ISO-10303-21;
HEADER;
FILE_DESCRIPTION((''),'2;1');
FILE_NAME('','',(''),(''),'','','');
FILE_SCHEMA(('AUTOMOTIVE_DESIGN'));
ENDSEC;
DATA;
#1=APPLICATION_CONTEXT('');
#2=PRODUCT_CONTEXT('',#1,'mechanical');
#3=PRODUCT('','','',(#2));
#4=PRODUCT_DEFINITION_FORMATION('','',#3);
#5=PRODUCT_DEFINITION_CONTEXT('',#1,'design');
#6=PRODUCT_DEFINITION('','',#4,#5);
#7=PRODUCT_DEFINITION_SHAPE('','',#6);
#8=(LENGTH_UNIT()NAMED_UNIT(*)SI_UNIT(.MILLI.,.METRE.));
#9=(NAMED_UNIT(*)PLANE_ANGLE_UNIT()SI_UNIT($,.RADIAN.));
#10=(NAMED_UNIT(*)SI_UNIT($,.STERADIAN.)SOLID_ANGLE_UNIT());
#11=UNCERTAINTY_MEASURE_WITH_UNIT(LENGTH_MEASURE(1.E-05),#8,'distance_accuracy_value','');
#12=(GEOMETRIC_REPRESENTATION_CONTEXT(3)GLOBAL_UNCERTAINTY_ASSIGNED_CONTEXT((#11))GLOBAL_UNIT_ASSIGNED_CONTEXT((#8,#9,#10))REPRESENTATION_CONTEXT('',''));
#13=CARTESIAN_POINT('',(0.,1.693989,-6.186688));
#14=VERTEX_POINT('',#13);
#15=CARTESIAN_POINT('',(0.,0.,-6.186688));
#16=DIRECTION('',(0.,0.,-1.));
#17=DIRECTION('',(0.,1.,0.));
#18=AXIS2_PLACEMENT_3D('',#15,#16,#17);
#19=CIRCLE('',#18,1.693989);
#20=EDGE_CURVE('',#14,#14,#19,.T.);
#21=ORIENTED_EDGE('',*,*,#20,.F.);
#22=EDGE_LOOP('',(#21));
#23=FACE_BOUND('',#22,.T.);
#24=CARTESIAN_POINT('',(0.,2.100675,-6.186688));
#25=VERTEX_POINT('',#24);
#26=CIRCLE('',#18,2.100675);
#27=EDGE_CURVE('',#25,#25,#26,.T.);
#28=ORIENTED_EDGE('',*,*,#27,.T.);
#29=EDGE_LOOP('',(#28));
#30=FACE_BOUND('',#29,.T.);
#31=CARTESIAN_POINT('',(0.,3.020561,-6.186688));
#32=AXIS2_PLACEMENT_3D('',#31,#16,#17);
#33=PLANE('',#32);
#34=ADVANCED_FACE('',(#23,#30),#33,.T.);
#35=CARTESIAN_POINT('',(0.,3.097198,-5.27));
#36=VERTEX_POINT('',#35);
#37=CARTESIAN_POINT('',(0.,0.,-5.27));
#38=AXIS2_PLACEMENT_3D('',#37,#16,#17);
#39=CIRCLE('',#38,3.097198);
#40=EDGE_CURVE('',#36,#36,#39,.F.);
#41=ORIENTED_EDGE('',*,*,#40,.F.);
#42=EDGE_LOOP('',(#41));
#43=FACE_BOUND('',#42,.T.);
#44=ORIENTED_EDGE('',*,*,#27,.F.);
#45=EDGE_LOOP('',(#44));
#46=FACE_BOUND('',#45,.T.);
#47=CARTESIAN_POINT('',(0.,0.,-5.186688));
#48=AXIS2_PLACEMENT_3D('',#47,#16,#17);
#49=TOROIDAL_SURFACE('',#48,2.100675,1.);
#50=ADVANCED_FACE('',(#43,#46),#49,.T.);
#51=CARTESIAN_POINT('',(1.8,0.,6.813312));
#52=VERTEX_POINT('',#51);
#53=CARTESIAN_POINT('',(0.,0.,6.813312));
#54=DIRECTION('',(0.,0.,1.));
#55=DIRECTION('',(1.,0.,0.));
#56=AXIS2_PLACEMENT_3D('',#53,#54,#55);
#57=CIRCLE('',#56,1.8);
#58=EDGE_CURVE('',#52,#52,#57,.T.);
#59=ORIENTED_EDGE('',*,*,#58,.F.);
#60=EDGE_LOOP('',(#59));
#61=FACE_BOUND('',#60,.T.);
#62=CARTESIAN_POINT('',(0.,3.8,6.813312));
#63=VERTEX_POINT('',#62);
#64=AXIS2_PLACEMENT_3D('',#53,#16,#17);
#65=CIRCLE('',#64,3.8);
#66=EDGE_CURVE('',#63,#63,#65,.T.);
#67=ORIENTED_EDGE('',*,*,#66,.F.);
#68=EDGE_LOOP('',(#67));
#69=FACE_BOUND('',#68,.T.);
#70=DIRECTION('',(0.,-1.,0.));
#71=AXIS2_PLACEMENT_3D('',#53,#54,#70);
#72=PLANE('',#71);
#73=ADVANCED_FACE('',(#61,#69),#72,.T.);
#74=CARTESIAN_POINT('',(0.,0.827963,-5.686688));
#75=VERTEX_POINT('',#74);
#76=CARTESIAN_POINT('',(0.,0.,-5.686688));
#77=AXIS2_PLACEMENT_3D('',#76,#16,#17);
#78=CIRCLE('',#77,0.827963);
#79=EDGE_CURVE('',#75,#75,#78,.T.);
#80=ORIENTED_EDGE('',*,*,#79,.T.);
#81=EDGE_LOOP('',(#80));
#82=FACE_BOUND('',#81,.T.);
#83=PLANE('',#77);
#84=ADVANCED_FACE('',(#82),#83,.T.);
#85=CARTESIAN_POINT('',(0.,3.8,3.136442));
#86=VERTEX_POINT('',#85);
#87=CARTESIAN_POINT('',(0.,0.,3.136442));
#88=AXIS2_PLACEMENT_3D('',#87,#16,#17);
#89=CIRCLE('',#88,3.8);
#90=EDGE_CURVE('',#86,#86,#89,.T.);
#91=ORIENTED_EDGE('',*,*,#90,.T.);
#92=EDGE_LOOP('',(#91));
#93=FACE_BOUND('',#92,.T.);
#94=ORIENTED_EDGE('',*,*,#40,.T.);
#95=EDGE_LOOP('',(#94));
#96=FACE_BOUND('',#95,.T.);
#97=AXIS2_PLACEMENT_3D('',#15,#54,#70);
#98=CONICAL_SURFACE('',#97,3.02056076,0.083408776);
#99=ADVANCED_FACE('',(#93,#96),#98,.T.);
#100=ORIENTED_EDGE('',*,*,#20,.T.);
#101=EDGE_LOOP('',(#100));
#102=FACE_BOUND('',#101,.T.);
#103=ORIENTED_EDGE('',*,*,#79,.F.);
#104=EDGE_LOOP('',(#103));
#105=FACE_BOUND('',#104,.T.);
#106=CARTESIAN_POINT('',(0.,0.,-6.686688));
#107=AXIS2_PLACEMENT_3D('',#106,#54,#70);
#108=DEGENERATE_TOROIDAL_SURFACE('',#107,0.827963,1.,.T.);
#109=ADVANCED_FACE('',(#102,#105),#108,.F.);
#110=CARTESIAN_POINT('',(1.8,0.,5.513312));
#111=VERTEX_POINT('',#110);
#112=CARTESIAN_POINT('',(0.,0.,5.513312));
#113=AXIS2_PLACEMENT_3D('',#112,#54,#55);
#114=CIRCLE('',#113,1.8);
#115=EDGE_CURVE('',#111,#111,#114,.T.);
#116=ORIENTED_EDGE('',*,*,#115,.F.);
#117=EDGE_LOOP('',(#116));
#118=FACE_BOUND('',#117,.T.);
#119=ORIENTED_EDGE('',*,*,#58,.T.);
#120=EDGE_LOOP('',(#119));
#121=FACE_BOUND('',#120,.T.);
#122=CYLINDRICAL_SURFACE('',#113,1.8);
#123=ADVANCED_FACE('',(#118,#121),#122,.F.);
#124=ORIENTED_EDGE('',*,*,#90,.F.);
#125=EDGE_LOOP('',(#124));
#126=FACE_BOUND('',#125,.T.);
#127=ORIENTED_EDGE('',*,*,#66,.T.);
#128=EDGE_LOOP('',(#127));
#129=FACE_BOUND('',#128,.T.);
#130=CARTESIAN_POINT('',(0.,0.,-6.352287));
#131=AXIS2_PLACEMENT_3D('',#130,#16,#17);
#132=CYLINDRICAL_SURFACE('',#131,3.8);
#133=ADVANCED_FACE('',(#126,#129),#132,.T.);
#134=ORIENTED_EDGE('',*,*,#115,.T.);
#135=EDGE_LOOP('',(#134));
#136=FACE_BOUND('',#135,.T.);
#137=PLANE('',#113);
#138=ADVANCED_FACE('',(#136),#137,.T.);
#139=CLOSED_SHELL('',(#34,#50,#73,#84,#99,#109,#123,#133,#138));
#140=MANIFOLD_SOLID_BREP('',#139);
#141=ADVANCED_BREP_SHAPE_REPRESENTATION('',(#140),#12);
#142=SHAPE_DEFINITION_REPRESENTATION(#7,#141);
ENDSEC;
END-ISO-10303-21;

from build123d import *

# Parameters (mm, degrees)
SKETCH_5_R          = 1.8
CUT_EXTRUDE_2_DEPTH = 1.3
FILLET_1_R          = 1
SKETCH_6_R          = 1.693988814
CUT_EXTRUDE_3_DEPTH = 0.5
FILLET_2_R          = 1


with BuildPart() as part:
    # 草图1 → 旋转1 (revolve)
    with BuildSketch(Plane(origin=(0, 0, 0), x_dir=(0, 0, -1), z_dir=(1, 0, 0))):
        Polygon((6.186687636, 3.02056076), (6.186687636, 0), (-6.813312364, 0), (-6.813312364, 3.8), (-3.136442493, 3.8), align=None)
    revolve(axis=Axis((0, 0, -6.352286977), (0, 0, 1)))

    # 草图5 → 切除-拉伸2 (cut)
    with BuildSketch(Plane.XY.offset(6.813312364)):
        Circle(SKETCH_5_R)
    extrude(amount=-CUT_EXTRUDE_2_DEPTH, mode=Mode.SUBTRACT)

    # 圆角1
    fillet_1_edges = [part.edges().sort_by_distance(p)[0] for p in [
        (0, -3.02056076, -6.186687636),
    ]]
    fillet(fillet_1_edges, radius=FILLET_1_R)

    # 草图6 → 切除-拉伸3 (cut)
    with BuildSketch(Plane(origin=(0, 0, -6.186687636), x_dir=(-1, 0, 0), z_dir=(0, 0, -1))):
        with Locations(Location((0, 0, 0), (0, 0, 90))):
            Circle(SKETCH_6_R)
    extrude(amount=-CUT_EXTRUDE_3_DEPTH, mode=Mode.SUBTRACT)

    # 圆角2
    # the kernel refuses this fillet: 1 mm, written as the material it adds along each edge
    with BuildSketch(Plane(origin=(0, 0, -5.686687636), x_dir=(0, 1, 0), z_dir=(-1, 0, 0))) as fillet_2_piece_1:
        with BuildLine():
            CenterArc((0.82796341, 1), FILLET_2_R, 270, 60)
            Line((0.82796341, 0), (0.82796341, -0.02))
            Line((0.82796341, -0.02), (1.693988814, -0.02))
            Line((1.693988814, -0.02), (1.713988814, 0))
            ThreePointArc((1.713988814, 0), (1.713988814, 0.25), (1.711309322, 0.49))
            Line((1.711309322, 0.49), (1.693988814, 0.5))
        make_face()
    revolve(axis=Axis((0, 0, -5.686687636), (0, 0, -1)))


solid = part.part
